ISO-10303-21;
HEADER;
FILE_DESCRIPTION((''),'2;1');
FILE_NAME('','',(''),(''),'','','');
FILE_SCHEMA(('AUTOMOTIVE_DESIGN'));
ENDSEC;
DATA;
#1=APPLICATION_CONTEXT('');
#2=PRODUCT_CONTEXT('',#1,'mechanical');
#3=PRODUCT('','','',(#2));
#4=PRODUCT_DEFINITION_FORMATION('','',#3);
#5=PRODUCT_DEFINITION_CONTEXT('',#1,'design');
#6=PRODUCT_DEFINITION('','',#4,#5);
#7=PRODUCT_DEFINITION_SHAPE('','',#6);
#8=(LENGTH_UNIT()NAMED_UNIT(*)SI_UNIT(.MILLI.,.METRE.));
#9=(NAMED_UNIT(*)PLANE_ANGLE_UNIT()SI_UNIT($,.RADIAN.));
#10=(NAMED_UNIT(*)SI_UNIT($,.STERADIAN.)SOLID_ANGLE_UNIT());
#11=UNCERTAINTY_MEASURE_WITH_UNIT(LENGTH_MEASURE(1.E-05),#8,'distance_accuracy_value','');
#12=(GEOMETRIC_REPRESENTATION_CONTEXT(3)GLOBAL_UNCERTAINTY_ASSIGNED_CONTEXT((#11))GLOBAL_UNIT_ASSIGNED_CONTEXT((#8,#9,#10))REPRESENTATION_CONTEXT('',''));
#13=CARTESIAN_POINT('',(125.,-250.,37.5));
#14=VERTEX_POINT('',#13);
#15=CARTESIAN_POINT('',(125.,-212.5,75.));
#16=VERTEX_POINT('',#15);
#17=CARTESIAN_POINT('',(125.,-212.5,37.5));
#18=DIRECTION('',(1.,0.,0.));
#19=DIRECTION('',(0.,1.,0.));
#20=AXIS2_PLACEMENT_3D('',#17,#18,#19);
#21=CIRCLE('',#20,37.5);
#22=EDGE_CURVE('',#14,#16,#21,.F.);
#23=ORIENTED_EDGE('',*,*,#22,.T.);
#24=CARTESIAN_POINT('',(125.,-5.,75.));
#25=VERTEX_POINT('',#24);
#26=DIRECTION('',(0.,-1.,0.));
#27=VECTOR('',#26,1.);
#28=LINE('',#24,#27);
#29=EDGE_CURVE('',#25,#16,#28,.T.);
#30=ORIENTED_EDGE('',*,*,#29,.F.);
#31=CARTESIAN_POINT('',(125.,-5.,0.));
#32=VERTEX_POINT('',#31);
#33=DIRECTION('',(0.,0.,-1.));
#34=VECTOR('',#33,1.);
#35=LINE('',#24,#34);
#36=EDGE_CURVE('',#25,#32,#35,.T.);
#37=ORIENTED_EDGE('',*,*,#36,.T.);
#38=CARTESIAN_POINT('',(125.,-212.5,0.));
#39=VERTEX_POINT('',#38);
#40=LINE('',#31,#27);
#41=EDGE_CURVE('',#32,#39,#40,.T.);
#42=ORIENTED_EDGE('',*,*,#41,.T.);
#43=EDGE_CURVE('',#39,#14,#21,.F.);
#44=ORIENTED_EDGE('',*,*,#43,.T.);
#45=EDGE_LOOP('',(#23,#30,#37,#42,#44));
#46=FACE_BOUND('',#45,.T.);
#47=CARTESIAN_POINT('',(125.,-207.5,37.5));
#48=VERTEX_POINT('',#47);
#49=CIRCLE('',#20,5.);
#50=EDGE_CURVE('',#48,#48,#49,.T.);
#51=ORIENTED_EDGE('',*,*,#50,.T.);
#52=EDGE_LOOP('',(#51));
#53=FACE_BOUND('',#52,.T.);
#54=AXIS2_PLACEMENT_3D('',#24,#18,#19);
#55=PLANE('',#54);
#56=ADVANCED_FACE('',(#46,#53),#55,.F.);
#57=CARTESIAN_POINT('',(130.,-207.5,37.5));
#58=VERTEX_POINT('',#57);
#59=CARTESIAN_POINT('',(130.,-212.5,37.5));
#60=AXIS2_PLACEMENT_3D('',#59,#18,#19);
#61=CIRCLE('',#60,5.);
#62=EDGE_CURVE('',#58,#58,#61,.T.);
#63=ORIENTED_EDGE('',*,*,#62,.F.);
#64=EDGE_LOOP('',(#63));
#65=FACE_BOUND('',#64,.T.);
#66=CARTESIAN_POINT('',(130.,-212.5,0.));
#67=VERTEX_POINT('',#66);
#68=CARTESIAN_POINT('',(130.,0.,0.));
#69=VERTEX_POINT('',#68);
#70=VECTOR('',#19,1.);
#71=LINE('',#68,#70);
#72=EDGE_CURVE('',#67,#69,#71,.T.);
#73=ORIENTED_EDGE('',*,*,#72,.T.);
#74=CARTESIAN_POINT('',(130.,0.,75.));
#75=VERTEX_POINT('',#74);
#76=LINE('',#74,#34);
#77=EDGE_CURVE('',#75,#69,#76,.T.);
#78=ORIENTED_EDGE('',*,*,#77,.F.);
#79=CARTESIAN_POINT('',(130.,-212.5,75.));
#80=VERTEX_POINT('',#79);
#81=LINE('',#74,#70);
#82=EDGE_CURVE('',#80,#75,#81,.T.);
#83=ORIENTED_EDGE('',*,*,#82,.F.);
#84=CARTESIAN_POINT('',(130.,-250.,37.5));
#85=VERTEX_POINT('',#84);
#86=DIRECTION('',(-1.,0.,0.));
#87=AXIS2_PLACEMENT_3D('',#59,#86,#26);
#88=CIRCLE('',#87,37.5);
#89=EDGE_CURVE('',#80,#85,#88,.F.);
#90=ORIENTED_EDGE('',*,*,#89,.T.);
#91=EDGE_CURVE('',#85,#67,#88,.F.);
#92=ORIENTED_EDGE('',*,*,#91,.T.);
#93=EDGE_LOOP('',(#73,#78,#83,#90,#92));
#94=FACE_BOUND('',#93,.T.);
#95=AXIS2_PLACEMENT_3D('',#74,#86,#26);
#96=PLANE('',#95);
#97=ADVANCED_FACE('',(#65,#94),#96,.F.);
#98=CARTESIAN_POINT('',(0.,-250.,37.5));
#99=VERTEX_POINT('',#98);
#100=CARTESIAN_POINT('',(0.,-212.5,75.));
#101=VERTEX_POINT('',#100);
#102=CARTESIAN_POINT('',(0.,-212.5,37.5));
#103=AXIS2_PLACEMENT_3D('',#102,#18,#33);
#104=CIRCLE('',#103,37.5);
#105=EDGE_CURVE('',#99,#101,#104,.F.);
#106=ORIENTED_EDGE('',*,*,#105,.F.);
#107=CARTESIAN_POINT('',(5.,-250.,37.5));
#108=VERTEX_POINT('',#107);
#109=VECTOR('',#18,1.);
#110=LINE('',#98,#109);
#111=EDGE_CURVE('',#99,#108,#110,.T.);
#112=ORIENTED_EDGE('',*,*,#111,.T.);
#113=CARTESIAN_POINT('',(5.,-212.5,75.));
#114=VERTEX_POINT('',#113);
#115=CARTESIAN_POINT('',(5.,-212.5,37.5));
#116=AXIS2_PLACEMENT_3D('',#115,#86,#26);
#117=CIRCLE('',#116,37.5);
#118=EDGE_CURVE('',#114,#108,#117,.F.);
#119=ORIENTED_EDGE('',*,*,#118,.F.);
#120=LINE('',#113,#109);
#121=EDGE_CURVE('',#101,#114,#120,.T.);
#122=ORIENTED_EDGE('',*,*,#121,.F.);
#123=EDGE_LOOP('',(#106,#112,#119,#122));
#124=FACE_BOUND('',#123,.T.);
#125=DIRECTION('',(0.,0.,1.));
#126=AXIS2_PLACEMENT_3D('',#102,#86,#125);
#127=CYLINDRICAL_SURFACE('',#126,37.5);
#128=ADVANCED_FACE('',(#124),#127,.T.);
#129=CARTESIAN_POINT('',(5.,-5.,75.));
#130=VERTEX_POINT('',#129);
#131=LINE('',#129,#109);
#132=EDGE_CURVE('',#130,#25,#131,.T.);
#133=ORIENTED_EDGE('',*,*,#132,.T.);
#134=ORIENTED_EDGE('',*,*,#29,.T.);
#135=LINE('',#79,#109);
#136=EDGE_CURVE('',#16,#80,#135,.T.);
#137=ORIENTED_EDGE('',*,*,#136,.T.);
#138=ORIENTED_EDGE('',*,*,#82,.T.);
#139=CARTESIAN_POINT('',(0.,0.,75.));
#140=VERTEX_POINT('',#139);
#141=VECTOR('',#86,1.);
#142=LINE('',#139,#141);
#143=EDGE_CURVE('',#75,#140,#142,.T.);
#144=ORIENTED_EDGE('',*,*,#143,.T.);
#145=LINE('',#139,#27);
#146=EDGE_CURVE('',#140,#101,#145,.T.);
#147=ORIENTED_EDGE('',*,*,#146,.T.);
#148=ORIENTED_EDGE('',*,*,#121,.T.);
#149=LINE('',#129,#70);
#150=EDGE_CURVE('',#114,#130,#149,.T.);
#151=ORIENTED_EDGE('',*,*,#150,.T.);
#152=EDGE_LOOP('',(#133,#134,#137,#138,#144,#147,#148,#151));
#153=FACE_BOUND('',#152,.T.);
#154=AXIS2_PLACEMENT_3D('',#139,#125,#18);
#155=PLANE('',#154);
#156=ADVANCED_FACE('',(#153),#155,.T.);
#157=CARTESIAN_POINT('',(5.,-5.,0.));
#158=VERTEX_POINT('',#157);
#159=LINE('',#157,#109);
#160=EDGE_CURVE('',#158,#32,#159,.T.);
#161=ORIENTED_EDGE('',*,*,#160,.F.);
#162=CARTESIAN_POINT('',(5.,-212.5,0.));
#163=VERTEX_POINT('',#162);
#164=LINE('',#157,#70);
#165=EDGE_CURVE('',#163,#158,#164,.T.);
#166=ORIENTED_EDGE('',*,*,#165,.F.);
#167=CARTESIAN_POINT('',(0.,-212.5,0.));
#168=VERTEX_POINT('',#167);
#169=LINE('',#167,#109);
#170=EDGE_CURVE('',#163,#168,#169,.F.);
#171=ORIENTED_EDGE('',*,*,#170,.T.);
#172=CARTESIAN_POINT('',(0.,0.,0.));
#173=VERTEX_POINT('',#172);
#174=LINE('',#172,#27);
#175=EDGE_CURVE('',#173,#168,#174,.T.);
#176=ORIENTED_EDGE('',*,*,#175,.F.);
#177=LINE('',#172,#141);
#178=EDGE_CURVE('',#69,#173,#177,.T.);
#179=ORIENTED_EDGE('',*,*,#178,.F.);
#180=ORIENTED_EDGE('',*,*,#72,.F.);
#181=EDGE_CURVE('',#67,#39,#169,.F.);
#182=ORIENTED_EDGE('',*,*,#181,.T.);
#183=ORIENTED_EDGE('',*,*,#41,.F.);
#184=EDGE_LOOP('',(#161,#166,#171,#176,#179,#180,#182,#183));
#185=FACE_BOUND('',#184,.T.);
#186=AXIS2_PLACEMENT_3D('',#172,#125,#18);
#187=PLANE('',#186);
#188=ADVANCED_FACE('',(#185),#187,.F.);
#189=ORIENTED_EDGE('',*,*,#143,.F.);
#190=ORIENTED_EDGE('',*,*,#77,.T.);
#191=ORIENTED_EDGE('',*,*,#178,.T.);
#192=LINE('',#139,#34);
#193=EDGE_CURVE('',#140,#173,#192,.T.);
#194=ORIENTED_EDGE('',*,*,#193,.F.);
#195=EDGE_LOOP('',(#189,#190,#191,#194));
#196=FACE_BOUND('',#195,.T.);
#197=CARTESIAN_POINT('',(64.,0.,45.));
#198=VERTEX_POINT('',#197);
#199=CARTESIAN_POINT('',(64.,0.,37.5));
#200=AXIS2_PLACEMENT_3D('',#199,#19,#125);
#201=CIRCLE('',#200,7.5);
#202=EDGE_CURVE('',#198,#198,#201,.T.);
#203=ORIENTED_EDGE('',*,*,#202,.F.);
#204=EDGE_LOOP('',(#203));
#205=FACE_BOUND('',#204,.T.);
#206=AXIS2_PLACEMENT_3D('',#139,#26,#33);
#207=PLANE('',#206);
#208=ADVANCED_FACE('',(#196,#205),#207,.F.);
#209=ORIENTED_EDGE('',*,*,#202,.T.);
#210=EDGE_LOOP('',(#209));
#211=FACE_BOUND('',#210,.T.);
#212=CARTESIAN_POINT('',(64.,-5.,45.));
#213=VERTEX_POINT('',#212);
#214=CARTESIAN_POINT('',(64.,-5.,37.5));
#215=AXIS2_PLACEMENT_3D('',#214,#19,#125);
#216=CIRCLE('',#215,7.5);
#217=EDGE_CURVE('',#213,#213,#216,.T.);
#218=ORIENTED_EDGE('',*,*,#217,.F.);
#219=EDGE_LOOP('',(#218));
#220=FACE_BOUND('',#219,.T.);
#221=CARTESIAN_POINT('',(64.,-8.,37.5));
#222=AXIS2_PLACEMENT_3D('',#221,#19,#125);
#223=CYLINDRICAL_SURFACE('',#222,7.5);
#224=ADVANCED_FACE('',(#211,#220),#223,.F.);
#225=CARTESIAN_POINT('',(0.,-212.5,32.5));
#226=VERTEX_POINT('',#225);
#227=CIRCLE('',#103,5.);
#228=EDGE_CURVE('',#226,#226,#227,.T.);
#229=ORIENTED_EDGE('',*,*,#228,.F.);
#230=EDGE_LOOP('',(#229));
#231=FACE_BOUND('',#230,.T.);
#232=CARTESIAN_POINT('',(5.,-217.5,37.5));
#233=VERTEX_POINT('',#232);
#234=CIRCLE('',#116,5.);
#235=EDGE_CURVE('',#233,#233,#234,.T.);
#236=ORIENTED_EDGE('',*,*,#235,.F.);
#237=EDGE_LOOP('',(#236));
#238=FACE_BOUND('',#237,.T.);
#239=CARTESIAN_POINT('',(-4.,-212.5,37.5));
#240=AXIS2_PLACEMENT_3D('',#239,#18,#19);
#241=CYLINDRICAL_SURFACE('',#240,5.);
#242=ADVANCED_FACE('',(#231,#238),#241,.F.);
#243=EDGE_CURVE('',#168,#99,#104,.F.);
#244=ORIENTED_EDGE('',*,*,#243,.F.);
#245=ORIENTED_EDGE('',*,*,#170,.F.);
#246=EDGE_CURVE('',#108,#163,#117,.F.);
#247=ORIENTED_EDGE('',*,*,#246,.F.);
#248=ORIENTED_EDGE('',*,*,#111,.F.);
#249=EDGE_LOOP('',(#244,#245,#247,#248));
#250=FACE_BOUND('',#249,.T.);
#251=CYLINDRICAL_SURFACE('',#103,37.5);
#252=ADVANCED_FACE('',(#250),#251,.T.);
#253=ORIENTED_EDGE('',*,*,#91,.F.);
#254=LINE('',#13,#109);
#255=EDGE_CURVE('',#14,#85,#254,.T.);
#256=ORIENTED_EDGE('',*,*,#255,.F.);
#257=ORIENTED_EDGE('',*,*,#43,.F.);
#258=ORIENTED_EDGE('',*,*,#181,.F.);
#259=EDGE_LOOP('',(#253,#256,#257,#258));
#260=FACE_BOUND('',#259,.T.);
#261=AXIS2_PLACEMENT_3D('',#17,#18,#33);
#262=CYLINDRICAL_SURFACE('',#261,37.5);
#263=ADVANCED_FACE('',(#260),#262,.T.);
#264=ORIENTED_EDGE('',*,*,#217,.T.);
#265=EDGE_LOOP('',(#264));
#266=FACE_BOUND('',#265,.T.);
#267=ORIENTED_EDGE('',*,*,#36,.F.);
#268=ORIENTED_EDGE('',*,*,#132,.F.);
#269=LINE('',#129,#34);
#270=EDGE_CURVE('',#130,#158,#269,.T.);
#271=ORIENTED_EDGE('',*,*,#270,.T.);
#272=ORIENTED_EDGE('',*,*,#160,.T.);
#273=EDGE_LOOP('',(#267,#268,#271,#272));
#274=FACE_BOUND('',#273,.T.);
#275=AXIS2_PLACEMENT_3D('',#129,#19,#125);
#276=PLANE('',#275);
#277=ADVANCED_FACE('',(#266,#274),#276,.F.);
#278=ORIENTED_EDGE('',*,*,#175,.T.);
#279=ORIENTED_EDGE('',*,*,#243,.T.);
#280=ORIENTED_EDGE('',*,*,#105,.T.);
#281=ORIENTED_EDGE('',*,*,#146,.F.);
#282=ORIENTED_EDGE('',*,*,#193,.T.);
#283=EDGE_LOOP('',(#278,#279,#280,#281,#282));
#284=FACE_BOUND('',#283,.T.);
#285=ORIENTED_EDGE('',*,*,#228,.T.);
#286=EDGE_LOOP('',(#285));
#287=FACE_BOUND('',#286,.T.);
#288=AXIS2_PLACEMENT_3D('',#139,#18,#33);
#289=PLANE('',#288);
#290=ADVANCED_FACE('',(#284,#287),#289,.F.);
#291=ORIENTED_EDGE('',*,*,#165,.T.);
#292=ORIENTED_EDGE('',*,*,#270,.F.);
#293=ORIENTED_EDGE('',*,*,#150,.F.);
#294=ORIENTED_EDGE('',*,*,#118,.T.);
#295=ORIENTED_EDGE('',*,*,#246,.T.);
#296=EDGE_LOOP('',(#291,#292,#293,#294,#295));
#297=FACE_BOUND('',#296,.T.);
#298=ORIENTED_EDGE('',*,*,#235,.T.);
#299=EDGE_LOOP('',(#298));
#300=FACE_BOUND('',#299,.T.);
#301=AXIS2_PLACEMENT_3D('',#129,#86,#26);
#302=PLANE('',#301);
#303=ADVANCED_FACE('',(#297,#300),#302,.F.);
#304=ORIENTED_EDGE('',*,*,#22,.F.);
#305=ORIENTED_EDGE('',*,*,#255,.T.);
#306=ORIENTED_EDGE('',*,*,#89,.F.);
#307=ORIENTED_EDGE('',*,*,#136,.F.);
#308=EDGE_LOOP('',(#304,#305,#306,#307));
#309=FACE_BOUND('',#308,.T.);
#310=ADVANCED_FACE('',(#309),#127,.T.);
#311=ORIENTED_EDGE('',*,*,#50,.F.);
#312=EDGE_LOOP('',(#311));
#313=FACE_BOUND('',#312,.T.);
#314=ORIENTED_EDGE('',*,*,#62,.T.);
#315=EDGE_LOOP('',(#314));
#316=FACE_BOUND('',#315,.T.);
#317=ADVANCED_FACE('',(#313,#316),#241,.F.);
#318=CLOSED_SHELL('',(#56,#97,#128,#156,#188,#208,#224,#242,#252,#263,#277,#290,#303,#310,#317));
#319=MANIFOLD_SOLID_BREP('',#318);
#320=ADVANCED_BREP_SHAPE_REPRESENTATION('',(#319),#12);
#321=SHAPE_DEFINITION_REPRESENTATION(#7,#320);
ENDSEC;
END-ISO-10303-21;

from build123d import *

# Parameters (mm, degrees)
BOSS_EXTRUDE1_DEPTH = 75
SKETCH2_R           = 7.5
CUT_EXTRUDE1_DEPTH  = 8
SKETCH3_R           = 5
CUT_EXTRUDE2_DEPTH  = 134
FILLET1_R           = 37.5


with BuildPart() as part:
    # Sketch1 → Boss-Extrude1 (new body)
    with BuildSketch(Plane.XY):
        Polygon((125, -250), (130, -250), (130, 0), (0, 0), (0, -250), (5, -250), (5, -5), (125, -5), align=None)
    extrude(amount=BOSS_EXTRUDE1_DEPTH)

    # Sketch2 → Cut-Extrude1 (cut)
    with BuildSketch(Plane(origin=(0, 0, 0), x_dir=(1, 0, 0), z_dir=(0, 1, 0))):
        with Locations(Location((64, -37.5, 0), (0, 0, 270))):
            Circle(SKETCH2_R)
    extrude(amount=-CUT_EXTRUDE1_DEPTH, mode=Mode.SUBTRACT)

    # Sketch3 → Cut-Extrude2 (cut)
    with BuildSketch(Plane(origin=(130, 0, 0), x_dir=(0, 0, -1), z_dir=(1, 0, 0))):
        with Locations(Location((-37.5, -212.5, 0), (0, 0, 90))):
            Circle(SKETCH3_R)
    extrude(amount=-CUT_EXTRUDE2_DEPTH, mode=Mode.SUBTRACT)

    # Fillet1
    fillet1_edges = [part.edges().sort_by_distance(p)[0] for p in [
        (127.5, -250, 75),
        (2.5, -250, 75),
        (2.5, -250, 0),
        (127.5, -250, 0),
    ]]
    fillet(fillet1_edges, radius=FILLET1_R - 0.0001)  # a hair under: the kernel refuses the full size


solid = part.part
